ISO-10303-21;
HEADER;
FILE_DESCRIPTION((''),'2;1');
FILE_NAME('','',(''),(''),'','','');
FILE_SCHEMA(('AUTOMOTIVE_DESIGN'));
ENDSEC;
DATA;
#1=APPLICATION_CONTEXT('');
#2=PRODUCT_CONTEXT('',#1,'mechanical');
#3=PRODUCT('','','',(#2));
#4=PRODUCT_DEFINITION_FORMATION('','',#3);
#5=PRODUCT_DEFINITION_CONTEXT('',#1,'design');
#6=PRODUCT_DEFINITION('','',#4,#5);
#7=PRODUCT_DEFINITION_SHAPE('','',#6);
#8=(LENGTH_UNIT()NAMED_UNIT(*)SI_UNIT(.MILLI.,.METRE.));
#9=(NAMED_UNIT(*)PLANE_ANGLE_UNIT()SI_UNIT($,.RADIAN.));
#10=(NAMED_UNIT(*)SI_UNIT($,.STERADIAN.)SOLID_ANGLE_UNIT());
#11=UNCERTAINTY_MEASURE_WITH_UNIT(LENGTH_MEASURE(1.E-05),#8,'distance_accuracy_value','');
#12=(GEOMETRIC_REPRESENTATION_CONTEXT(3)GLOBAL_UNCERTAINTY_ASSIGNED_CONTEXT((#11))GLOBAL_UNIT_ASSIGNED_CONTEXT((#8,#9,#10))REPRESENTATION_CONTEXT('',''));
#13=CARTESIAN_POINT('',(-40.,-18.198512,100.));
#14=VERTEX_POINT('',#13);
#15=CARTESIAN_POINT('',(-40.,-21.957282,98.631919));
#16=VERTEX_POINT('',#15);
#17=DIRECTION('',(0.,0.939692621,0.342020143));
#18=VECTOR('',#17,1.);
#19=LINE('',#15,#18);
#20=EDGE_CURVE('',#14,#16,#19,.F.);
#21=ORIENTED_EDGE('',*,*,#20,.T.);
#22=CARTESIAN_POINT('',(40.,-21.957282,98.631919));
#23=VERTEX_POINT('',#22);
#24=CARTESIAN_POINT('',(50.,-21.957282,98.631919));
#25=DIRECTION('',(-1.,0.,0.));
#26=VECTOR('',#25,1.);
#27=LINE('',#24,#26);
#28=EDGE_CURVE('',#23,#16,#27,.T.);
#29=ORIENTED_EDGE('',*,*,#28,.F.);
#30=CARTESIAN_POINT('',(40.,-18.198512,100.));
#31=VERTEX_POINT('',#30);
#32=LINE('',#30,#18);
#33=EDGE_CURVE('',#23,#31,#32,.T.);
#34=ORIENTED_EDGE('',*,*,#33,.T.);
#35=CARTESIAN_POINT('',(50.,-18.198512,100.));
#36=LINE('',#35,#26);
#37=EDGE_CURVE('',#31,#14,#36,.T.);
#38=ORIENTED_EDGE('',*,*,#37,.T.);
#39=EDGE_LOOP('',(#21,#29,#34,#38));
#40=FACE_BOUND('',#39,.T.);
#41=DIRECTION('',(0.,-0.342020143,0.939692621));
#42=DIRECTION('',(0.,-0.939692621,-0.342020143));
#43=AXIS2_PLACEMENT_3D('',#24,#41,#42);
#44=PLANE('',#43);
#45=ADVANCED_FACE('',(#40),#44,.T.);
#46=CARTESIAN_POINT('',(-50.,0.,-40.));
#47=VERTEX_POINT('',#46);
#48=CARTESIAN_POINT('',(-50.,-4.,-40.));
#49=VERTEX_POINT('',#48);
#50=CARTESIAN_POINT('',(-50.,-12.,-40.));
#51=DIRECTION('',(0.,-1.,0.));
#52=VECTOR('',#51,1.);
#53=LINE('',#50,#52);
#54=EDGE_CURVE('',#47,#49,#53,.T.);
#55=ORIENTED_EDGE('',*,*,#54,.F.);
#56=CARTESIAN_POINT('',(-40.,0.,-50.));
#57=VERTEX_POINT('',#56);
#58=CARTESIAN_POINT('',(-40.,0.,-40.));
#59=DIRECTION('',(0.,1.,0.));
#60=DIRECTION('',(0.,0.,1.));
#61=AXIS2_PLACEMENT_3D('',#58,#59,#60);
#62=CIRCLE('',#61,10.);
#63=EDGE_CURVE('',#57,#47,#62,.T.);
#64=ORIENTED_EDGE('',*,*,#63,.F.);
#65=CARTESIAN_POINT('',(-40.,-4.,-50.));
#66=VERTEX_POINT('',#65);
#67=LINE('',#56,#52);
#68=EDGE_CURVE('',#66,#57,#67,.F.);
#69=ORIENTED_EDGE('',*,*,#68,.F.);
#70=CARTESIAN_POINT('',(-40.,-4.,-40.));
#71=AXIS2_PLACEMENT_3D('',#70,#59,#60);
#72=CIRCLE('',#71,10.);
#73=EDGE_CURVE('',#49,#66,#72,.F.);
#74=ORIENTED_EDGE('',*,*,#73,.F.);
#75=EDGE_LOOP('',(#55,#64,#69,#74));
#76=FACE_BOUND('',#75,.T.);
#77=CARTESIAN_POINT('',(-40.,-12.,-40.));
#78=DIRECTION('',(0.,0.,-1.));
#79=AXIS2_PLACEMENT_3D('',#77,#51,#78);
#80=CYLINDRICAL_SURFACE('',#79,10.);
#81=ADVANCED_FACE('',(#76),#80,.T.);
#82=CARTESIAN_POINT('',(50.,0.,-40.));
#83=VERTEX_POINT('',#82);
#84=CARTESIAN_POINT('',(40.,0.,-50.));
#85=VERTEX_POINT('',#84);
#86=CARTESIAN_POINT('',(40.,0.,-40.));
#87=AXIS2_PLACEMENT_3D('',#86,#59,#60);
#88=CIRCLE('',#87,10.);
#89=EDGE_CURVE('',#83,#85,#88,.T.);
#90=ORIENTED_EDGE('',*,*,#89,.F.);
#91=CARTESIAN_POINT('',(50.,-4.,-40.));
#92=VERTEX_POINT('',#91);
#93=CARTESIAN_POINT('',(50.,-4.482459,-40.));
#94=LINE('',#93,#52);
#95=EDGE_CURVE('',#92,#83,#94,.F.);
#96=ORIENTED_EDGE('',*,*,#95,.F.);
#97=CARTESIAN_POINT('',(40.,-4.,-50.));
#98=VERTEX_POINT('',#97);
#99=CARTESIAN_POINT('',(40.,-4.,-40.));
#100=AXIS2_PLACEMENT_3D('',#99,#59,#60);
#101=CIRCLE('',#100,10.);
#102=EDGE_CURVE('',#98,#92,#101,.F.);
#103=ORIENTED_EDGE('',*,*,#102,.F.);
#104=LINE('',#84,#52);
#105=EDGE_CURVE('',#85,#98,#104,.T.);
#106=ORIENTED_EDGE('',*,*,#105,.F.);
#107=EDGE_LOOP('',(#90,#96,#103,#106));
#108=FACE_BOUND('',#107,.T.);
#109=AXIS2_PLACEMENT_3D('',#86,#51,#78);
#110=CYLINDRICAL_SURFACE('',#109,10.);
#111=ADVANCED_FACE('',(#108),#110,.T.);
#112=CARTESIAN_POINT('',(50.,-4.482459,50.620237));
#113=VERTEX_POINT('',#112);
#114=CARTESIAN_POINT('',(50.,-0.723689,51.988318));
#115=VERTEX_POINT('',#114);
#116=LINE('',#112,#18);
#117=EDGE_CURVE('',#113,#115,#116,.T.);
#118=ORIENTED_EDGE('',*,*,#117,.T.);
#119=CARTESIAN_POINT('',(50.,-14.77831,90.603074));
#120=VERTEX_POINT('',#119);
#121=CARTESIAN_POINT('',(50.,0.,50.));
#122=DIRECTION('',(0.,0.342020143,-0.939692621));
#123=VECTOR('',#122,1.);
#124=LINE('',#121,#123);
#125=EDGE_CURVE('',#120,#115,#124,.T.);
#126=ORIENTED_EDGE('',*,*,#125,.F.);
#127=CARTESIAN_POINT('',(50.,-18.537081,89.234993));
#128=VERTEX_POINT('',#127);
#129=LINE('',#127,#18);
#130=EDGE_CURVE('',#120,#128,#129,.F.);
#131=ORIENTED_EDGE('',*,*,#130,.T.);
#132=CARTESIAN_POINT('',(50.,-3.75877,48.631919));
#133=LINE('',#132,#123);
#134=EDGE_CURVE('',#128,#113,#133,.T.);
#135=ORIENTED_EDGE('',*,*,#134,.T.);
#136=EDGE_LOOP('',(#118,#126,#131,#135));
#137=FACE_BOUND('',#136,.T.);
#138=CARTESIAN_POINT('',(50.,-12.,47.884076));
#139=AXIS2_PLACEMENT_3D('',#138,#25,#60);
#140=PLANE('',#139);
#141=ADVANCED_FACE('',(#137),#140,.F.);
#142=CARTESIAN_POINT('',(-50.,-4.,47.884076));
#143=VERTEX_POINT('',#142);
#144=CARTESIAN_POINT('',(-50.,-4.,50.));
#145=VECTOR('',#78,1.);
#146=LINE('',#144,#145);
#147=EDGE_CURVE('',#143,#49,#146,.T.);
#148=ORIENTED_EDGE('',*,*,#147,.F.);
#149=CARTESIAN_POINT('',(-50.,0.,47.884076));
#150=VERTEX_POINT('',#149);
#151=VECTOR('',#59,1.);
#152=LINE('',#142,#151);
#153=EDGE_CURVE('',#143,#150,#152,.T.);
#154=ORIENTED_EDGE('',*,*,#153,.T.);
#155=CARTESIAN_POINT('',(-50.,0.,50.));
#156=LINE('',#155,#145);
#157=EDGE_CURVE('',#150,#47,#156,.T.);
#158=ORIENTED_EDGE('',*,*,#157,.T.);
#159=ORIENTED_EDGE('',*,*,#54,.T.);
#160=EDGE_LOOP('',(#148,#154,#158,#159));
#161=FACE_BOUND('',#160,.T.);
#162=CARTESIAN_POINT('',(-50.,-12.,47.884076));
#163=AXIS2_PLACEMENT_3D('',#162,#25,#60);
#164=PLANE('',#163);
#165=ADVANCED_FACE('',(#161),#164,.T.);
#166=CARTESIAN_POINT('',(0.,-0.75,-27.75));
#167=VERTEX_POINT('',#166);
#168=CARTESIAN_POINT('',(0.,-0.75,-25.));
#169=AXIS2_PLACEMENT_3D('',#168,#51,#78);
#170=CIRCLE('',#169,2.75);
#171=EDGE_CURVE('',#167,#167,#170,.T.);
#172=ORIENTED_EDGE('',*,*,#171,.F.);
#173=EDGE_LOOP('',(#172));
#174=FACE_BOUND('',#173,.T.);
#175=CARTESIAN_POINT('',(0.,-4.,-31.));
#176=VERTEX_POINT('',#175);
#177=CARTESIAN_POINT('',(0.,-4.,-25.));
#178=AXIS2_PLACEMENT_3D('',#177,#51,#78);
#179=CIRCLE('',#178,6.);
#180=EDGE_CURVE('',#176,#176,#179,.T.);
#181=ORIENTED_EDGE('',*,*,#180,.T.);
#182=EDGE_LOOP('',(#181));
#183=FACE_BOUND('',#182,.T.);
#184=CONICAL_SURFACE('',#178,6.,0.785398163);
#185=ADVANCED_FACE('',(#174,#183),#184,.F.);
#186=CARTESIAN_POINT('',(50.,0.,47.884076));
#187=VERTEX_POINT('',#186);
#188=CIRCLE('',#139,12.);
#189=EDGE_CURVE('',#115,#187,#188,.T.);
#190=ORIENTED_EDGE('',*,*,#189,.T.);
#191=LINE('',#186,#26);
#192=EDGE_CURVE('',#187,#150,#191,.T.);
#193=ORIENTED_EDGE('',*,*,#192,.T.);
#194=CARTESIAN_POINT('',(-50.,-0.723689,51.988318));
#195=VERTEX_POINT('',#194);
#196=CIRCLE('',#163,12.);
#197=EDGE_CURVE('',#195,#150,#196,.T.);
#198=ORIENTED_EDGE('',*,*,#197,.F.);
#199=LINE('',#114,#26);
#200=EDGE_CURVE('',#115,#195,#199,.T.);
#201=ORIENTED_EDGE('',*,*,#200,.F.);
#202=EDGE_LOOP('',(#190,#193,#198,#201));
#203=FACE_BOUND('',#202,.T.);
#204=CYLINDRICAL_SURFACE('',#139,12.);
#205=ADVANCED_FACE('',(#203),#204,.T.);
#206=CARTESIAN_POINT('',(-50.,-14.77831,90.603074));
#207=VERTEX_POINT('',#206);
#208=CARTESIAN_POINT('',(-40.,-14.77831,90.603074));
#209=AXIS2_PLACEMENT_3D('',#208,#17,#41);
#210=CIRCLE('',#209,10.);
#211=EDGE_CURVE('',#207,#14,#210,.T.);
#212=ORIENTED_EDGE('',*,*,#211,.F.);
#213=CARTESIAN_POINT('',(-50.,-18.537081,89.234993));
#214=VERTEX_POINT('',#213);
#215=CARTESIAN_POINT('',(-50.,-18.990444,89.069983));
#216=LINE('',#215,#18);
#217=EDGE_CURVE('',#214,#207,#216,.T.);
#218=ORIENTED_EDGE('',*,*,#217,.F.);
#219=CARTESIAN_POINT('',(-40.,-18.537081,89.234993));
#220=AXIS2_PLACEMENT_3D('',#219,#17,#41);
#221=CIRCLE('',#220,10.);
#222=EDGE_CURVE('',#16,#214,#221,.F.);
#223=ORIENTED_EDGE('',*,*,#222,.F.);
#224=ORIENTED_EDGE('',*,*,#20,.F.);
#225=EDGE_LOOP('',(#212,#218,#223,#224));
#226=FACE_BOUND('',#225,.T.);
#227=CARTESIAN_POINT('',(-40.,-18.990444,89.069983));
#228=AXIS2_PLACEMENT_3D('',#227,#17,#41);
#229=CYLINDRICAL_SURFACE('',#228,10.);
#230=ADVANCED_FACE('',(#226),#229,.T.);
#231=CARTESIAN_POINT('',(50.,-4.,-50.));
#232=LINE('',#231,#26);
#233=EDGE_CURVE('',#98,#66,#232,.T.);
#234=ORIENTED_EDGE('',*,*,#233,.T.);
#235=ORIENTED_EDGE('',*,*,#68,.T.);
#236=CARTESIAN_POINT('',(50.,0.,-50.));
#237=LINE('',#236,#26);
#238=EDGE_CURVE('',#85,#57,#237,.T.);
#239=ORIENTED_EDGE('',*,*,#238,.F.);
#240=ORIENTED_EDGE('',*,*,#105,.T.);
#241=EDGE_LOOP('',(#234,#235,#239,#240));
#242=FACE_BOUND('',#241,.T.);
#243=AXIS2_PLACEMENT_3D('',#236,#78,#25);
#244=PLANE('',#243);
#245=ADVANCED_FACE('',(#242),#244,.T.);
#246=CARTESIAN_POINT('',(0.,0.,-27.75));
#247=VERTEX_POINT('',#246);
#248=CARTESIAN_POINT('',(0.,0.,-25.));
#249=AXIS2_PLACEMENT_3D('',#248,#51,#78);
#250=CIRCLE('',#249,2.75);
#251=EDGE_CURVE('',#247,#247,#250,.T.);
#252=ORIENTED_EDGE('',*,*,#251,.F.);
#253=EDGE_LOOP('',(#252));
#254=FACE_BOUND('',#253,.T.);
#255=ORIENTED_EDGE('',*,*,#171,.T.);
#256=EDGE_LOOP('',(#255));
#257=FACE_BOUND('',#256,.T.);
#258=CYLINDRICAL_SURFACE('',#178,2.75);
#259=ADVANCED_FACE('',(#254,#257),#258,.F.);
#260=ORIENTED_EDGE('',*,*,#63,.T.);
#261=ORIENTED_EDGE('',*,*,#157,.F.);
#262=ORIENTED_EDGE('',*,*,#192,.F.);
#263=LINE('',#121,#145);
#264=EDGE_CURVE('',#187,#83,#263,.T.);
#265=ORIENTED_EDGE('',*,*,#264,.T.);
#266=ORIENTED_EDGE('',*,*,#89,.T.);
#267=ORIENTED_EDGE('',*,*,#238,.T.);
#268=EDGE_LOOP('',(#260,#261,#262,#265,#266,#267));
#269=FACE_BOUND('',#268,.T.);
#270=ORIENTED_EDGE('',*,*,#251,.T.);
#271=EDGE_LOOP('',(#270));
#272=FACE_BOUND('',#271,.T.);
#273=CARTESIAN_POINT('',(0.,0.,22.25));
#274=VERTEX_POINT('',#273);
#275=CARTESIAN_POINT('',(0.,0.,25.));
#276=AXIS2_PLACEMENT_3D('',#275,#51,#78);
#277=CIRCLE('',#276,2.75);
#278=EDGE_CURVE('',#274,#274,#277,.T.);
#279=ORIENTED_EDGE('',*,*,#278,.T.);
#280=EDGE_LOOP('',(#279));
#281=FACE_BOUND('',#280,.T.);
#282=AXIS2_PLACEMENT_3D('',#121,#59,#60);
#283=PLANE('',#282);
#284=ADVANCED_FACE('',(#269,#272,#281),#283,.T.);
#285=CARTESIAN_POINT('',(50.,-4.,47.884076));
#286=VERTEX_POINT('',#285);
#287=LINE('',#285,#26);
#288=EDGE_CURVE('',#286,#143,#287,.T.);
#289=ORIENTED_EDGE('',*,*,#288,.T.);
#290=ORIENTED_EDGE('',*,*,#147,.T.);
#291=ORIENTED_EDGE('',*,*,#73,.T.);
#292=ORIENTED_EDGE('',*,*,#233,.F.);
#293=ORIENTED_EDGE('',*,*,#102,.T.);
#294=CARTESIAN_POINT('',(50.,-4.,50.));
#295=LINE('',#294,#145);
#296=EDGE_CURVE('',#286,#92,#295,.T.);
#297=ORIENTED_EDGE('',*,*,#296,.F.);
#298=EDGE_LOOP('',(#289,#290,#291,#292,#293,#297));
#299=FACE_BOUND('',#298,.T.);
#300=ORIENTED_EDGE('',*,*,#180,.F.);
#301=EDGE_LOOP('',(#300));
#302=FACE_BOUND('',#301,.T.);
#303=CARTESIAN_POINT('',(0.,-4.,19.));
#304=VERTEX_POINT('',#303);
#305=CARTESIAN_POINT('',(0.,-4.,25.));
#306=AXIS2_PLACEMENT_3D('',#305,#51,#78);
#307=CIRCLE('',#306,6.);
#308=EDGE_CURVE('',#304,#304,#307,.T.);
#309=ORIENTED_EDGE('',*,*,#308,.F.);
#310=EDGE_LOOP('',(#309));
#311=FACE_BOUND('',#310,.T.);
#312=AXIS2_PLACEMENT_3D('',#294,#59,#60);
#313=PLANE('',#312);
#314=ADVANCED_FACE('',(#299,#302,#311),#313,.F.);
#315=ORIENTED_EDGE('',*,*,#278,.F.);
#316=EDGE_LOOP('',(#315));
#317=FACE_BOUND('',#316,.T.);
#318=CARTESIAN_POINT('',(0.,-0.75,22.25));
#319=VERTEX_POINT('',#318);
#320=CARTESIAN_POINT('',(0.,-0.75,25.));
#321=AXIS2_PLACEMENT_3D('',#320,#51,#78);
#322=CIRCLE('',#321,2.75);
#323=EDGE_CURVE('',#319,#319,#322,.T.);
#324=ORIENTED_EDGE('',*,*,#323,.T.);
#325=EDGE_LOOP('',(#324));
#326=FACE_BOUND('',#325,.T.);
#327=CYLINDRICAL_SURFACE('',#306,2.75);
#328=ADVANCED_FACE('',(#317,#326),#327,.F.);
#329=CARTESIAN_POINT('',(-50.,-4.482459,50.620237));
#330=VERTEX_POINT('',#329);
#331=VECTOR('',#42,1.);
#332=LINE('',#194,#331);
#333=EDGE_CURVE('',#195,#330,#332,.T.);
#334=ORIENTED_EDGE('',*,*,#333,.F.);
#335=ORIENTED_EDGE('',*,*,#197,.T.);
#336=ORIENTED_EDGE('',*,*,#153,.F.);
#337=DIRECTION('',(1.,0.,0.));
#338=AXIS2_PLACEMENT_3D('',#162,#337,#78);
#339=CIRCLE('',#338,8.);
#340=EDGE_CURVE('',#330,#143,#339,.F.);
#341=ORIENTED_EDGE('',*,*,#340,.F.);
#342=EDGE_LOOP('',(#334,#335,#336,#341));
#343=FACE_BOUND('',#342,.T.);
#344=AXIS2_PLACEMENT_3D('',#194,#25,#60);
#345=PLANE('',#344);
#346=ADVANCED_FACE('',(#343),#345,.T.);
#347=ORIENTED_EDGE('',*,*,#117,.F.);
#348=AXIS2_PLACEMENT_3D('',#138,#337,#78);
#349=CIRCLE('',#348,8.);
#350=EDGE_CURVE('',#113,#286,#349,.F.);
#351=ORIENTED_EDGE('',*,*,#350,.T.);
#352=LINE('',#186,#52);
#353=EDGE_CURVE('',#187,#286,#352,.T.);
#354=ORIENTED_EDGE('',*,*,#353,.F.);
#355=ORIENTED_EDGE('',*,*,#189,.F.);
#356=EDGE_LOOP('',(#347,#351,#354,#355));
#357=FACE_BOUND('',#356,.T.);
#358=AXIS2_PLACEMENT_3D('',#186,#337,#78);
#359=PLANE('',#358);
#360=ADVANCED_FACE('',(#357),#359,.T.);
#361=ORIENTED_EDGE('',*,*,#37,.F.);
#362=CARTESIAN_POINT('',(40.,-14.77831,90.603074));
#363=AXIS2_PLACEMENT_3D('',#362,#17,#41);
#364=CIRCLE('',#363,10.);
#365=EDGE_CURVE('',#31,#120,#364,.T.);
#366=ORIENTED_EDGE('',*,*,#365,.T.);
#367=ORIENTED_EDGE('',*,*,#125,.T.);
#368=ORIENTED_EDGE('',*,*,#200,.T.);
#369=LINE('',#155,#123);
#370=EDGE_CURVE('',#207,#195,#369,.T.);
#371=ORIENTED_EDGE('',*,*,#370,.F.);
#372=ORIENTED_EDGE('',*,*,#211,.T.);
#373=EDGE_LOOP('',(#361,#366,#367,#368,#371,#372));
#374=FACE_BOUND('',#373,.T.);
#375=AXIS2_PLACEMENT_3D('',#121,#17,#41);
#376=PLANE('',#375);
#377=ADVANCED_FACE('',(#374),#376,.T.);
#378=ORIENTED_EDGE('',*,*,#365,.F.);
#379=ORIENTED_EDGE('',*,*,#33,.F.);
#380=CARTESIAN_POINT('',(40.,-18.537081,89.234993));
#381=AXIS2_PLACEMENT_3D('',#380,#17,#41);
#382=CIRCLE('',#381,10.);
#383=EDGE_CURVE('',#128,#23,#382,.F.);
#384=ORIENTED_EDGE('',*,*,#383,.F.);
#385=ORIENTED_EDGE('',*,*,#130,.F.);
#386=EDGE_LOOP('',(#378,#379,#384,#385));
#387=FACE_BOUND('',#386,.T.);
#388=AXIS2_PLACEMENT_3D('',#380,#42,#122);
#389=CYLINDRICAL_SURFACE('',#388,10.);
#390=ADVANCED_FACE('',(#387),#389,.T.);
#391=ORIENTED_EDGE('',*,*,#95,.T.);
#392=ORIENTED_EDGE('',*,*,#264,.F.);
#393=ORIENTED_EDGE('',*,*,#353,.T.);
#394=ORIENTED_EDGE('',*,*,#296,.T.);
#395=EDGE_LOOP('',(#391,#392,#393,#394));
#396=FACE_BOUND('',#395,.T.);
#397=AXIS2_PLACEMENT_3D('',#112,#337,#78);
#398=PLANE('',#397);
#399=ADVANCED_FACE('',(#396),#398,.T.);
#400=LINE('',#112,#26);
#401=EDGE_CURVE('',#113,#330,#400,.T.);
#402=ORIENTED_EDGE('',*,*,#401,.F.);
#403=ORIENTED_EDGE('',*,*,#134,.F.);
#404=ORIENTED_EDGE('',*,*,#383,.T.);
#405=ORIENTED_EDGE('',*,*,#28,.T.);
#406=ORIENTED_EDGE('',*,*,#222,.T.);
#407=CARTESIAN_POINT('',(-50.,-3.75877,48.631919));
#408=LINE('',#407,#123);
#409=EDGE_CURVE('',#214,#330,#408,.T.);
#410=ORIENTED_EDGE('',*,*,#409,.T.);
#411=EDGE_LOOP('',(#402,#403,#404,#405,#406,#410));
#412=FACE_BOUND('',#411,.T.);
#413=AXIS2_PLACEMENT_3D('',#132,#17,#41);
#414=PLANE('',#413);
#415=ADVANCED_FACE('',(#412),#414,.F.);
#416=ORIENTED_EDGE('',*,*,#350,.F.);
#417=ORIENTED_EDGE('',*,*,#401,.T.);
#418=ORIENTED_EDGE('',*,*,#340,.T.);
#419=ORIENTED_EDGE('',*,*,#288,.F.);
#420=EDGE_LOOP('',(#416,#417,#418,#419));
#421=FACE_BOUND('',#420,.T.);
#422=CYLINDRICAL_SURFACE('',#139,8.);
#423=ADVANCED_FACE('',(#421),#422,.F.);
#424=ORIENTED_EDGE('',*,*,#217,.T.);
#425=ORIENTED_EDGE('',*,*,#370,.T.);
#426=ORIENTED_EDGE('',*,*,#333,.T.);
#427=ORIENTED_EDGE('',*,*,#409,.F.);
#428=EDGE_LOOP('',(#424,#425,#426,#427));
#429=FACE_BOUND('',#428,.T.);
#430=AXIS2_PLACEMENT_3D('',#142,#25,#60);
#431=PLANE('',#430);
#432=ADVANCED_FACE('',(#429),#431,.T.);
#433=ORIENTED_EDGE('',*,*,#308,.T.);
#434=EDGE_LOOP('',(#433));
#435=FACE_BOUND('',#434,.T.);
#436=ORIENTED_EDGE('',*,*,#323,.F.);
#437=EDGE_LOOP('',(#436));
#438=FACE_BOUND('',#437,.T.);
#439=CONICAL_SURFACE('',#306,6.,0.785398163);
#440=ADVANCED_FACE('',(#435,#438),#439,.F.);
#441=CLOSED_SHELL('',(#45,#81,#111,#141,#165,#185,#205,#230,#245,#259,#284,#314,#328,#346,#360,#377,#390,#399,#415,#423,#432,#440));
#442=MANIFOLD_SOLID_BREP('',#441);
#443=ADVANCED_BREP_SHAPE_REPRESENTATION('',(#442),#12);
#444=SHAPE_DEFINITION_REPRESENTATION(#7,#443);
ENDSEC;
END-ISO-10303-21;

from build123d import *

# Parameters (mm, degrees)
BASE_FLANGE1_START                           = -50
BASE_FLANGE1_DEPTH                           = 100
CSK_FOR_M5_COUNTERSUNK_FLAT_HEAD_SCR_2_COUNT = 2
CSK_FOR_M5_COUNTERSUNK_FLAT_HEAD_SCR_2_PITCH = 50
FILLET1_R                                    = 10


# Read off the part's stored shape, not the designer's step: Base-Flange1
with BuildPart() as part:
    # Base-Flange1 outline → Base-Flange1 (new body)
    with BuildSketch(Plane(origin=(0, 0, 0), x_dir=(0, 0, -1), z_dir=(1, 0, 0)).offset(BASE_FLANGE1_START)):
        with BuildLine():
            Line((-47.884076231, -4), (50, -4))
            Line((50, -4), (50, 0))
            Line((50, 0), (-47.884076231, 0))
            ThreePointArc((-47.884076231, 0), (-49.967854363, -0.182306964), (-51.988317951, -0.723688551))
            Line((-51.988317951, -0.723688551), (-100, -18.198511713))
            Line((-100, -18.198511713), (-98.631919427, -21.957282196))
            Line((-98.631919427, -21.957282196), (-50.620237378, -4.482459034))
            ThreePointArc((-50.620237378, -4.482459034), (-49.273261653, -4.121537976), (-47.884076231, -4))
        make_face()
    extrude(amount=BASE_FLANGE1_DEPTH)

    # Sketch8 → CSK for M5 Countersunk Flat Head Screw1 (revolve, cut)
    with BuildSketch(Plane(origin=(0, -4, 25), x_dir=(0, 0, -1), z_dir=(1, 0, 0))):
        Polygon((0, 0), (0, 4), (2.75, 4), (2.75, 3.25), (6, 0), align=None)
    csk_for_m5_countersunk_flat_head_screw1 = revolve(axis=Axis((0, -10.35, 25), (0, 1, 0)), mode=Mode.SUBTRACT)

    # CSK for M5 Countersunk Flat Head Scr 2: CSK for M5 Countersunk Flat Head Screw1 ×2
    with Locations(*[(0, 0, -i * CSK_FOR_M5_COUNTERSUNK_FLAT_HEAD_SCR_2_PITCH) for i in range(1, CSK_FOR_M5_COUNTERSUNK_FLAT_HEAD_SCR_2_COUNT)]):
        add(csk_for_m5_countersunk_flat_head_screw1, mode=Mode.SUBTRACT)

    # Fillet1
    fillet1_edges = [part.edges().sort_by_distance(p)[0] for p in [
        (50, -20.077896954, 99.315959714),
        (50, -2, -50),
        (-50, -20.077896954, 99.315959714),
        (-50, -2, -50),
    ]]
    fillet(fillet1_edges, radius=FILLET1_R)


solid = part.part
